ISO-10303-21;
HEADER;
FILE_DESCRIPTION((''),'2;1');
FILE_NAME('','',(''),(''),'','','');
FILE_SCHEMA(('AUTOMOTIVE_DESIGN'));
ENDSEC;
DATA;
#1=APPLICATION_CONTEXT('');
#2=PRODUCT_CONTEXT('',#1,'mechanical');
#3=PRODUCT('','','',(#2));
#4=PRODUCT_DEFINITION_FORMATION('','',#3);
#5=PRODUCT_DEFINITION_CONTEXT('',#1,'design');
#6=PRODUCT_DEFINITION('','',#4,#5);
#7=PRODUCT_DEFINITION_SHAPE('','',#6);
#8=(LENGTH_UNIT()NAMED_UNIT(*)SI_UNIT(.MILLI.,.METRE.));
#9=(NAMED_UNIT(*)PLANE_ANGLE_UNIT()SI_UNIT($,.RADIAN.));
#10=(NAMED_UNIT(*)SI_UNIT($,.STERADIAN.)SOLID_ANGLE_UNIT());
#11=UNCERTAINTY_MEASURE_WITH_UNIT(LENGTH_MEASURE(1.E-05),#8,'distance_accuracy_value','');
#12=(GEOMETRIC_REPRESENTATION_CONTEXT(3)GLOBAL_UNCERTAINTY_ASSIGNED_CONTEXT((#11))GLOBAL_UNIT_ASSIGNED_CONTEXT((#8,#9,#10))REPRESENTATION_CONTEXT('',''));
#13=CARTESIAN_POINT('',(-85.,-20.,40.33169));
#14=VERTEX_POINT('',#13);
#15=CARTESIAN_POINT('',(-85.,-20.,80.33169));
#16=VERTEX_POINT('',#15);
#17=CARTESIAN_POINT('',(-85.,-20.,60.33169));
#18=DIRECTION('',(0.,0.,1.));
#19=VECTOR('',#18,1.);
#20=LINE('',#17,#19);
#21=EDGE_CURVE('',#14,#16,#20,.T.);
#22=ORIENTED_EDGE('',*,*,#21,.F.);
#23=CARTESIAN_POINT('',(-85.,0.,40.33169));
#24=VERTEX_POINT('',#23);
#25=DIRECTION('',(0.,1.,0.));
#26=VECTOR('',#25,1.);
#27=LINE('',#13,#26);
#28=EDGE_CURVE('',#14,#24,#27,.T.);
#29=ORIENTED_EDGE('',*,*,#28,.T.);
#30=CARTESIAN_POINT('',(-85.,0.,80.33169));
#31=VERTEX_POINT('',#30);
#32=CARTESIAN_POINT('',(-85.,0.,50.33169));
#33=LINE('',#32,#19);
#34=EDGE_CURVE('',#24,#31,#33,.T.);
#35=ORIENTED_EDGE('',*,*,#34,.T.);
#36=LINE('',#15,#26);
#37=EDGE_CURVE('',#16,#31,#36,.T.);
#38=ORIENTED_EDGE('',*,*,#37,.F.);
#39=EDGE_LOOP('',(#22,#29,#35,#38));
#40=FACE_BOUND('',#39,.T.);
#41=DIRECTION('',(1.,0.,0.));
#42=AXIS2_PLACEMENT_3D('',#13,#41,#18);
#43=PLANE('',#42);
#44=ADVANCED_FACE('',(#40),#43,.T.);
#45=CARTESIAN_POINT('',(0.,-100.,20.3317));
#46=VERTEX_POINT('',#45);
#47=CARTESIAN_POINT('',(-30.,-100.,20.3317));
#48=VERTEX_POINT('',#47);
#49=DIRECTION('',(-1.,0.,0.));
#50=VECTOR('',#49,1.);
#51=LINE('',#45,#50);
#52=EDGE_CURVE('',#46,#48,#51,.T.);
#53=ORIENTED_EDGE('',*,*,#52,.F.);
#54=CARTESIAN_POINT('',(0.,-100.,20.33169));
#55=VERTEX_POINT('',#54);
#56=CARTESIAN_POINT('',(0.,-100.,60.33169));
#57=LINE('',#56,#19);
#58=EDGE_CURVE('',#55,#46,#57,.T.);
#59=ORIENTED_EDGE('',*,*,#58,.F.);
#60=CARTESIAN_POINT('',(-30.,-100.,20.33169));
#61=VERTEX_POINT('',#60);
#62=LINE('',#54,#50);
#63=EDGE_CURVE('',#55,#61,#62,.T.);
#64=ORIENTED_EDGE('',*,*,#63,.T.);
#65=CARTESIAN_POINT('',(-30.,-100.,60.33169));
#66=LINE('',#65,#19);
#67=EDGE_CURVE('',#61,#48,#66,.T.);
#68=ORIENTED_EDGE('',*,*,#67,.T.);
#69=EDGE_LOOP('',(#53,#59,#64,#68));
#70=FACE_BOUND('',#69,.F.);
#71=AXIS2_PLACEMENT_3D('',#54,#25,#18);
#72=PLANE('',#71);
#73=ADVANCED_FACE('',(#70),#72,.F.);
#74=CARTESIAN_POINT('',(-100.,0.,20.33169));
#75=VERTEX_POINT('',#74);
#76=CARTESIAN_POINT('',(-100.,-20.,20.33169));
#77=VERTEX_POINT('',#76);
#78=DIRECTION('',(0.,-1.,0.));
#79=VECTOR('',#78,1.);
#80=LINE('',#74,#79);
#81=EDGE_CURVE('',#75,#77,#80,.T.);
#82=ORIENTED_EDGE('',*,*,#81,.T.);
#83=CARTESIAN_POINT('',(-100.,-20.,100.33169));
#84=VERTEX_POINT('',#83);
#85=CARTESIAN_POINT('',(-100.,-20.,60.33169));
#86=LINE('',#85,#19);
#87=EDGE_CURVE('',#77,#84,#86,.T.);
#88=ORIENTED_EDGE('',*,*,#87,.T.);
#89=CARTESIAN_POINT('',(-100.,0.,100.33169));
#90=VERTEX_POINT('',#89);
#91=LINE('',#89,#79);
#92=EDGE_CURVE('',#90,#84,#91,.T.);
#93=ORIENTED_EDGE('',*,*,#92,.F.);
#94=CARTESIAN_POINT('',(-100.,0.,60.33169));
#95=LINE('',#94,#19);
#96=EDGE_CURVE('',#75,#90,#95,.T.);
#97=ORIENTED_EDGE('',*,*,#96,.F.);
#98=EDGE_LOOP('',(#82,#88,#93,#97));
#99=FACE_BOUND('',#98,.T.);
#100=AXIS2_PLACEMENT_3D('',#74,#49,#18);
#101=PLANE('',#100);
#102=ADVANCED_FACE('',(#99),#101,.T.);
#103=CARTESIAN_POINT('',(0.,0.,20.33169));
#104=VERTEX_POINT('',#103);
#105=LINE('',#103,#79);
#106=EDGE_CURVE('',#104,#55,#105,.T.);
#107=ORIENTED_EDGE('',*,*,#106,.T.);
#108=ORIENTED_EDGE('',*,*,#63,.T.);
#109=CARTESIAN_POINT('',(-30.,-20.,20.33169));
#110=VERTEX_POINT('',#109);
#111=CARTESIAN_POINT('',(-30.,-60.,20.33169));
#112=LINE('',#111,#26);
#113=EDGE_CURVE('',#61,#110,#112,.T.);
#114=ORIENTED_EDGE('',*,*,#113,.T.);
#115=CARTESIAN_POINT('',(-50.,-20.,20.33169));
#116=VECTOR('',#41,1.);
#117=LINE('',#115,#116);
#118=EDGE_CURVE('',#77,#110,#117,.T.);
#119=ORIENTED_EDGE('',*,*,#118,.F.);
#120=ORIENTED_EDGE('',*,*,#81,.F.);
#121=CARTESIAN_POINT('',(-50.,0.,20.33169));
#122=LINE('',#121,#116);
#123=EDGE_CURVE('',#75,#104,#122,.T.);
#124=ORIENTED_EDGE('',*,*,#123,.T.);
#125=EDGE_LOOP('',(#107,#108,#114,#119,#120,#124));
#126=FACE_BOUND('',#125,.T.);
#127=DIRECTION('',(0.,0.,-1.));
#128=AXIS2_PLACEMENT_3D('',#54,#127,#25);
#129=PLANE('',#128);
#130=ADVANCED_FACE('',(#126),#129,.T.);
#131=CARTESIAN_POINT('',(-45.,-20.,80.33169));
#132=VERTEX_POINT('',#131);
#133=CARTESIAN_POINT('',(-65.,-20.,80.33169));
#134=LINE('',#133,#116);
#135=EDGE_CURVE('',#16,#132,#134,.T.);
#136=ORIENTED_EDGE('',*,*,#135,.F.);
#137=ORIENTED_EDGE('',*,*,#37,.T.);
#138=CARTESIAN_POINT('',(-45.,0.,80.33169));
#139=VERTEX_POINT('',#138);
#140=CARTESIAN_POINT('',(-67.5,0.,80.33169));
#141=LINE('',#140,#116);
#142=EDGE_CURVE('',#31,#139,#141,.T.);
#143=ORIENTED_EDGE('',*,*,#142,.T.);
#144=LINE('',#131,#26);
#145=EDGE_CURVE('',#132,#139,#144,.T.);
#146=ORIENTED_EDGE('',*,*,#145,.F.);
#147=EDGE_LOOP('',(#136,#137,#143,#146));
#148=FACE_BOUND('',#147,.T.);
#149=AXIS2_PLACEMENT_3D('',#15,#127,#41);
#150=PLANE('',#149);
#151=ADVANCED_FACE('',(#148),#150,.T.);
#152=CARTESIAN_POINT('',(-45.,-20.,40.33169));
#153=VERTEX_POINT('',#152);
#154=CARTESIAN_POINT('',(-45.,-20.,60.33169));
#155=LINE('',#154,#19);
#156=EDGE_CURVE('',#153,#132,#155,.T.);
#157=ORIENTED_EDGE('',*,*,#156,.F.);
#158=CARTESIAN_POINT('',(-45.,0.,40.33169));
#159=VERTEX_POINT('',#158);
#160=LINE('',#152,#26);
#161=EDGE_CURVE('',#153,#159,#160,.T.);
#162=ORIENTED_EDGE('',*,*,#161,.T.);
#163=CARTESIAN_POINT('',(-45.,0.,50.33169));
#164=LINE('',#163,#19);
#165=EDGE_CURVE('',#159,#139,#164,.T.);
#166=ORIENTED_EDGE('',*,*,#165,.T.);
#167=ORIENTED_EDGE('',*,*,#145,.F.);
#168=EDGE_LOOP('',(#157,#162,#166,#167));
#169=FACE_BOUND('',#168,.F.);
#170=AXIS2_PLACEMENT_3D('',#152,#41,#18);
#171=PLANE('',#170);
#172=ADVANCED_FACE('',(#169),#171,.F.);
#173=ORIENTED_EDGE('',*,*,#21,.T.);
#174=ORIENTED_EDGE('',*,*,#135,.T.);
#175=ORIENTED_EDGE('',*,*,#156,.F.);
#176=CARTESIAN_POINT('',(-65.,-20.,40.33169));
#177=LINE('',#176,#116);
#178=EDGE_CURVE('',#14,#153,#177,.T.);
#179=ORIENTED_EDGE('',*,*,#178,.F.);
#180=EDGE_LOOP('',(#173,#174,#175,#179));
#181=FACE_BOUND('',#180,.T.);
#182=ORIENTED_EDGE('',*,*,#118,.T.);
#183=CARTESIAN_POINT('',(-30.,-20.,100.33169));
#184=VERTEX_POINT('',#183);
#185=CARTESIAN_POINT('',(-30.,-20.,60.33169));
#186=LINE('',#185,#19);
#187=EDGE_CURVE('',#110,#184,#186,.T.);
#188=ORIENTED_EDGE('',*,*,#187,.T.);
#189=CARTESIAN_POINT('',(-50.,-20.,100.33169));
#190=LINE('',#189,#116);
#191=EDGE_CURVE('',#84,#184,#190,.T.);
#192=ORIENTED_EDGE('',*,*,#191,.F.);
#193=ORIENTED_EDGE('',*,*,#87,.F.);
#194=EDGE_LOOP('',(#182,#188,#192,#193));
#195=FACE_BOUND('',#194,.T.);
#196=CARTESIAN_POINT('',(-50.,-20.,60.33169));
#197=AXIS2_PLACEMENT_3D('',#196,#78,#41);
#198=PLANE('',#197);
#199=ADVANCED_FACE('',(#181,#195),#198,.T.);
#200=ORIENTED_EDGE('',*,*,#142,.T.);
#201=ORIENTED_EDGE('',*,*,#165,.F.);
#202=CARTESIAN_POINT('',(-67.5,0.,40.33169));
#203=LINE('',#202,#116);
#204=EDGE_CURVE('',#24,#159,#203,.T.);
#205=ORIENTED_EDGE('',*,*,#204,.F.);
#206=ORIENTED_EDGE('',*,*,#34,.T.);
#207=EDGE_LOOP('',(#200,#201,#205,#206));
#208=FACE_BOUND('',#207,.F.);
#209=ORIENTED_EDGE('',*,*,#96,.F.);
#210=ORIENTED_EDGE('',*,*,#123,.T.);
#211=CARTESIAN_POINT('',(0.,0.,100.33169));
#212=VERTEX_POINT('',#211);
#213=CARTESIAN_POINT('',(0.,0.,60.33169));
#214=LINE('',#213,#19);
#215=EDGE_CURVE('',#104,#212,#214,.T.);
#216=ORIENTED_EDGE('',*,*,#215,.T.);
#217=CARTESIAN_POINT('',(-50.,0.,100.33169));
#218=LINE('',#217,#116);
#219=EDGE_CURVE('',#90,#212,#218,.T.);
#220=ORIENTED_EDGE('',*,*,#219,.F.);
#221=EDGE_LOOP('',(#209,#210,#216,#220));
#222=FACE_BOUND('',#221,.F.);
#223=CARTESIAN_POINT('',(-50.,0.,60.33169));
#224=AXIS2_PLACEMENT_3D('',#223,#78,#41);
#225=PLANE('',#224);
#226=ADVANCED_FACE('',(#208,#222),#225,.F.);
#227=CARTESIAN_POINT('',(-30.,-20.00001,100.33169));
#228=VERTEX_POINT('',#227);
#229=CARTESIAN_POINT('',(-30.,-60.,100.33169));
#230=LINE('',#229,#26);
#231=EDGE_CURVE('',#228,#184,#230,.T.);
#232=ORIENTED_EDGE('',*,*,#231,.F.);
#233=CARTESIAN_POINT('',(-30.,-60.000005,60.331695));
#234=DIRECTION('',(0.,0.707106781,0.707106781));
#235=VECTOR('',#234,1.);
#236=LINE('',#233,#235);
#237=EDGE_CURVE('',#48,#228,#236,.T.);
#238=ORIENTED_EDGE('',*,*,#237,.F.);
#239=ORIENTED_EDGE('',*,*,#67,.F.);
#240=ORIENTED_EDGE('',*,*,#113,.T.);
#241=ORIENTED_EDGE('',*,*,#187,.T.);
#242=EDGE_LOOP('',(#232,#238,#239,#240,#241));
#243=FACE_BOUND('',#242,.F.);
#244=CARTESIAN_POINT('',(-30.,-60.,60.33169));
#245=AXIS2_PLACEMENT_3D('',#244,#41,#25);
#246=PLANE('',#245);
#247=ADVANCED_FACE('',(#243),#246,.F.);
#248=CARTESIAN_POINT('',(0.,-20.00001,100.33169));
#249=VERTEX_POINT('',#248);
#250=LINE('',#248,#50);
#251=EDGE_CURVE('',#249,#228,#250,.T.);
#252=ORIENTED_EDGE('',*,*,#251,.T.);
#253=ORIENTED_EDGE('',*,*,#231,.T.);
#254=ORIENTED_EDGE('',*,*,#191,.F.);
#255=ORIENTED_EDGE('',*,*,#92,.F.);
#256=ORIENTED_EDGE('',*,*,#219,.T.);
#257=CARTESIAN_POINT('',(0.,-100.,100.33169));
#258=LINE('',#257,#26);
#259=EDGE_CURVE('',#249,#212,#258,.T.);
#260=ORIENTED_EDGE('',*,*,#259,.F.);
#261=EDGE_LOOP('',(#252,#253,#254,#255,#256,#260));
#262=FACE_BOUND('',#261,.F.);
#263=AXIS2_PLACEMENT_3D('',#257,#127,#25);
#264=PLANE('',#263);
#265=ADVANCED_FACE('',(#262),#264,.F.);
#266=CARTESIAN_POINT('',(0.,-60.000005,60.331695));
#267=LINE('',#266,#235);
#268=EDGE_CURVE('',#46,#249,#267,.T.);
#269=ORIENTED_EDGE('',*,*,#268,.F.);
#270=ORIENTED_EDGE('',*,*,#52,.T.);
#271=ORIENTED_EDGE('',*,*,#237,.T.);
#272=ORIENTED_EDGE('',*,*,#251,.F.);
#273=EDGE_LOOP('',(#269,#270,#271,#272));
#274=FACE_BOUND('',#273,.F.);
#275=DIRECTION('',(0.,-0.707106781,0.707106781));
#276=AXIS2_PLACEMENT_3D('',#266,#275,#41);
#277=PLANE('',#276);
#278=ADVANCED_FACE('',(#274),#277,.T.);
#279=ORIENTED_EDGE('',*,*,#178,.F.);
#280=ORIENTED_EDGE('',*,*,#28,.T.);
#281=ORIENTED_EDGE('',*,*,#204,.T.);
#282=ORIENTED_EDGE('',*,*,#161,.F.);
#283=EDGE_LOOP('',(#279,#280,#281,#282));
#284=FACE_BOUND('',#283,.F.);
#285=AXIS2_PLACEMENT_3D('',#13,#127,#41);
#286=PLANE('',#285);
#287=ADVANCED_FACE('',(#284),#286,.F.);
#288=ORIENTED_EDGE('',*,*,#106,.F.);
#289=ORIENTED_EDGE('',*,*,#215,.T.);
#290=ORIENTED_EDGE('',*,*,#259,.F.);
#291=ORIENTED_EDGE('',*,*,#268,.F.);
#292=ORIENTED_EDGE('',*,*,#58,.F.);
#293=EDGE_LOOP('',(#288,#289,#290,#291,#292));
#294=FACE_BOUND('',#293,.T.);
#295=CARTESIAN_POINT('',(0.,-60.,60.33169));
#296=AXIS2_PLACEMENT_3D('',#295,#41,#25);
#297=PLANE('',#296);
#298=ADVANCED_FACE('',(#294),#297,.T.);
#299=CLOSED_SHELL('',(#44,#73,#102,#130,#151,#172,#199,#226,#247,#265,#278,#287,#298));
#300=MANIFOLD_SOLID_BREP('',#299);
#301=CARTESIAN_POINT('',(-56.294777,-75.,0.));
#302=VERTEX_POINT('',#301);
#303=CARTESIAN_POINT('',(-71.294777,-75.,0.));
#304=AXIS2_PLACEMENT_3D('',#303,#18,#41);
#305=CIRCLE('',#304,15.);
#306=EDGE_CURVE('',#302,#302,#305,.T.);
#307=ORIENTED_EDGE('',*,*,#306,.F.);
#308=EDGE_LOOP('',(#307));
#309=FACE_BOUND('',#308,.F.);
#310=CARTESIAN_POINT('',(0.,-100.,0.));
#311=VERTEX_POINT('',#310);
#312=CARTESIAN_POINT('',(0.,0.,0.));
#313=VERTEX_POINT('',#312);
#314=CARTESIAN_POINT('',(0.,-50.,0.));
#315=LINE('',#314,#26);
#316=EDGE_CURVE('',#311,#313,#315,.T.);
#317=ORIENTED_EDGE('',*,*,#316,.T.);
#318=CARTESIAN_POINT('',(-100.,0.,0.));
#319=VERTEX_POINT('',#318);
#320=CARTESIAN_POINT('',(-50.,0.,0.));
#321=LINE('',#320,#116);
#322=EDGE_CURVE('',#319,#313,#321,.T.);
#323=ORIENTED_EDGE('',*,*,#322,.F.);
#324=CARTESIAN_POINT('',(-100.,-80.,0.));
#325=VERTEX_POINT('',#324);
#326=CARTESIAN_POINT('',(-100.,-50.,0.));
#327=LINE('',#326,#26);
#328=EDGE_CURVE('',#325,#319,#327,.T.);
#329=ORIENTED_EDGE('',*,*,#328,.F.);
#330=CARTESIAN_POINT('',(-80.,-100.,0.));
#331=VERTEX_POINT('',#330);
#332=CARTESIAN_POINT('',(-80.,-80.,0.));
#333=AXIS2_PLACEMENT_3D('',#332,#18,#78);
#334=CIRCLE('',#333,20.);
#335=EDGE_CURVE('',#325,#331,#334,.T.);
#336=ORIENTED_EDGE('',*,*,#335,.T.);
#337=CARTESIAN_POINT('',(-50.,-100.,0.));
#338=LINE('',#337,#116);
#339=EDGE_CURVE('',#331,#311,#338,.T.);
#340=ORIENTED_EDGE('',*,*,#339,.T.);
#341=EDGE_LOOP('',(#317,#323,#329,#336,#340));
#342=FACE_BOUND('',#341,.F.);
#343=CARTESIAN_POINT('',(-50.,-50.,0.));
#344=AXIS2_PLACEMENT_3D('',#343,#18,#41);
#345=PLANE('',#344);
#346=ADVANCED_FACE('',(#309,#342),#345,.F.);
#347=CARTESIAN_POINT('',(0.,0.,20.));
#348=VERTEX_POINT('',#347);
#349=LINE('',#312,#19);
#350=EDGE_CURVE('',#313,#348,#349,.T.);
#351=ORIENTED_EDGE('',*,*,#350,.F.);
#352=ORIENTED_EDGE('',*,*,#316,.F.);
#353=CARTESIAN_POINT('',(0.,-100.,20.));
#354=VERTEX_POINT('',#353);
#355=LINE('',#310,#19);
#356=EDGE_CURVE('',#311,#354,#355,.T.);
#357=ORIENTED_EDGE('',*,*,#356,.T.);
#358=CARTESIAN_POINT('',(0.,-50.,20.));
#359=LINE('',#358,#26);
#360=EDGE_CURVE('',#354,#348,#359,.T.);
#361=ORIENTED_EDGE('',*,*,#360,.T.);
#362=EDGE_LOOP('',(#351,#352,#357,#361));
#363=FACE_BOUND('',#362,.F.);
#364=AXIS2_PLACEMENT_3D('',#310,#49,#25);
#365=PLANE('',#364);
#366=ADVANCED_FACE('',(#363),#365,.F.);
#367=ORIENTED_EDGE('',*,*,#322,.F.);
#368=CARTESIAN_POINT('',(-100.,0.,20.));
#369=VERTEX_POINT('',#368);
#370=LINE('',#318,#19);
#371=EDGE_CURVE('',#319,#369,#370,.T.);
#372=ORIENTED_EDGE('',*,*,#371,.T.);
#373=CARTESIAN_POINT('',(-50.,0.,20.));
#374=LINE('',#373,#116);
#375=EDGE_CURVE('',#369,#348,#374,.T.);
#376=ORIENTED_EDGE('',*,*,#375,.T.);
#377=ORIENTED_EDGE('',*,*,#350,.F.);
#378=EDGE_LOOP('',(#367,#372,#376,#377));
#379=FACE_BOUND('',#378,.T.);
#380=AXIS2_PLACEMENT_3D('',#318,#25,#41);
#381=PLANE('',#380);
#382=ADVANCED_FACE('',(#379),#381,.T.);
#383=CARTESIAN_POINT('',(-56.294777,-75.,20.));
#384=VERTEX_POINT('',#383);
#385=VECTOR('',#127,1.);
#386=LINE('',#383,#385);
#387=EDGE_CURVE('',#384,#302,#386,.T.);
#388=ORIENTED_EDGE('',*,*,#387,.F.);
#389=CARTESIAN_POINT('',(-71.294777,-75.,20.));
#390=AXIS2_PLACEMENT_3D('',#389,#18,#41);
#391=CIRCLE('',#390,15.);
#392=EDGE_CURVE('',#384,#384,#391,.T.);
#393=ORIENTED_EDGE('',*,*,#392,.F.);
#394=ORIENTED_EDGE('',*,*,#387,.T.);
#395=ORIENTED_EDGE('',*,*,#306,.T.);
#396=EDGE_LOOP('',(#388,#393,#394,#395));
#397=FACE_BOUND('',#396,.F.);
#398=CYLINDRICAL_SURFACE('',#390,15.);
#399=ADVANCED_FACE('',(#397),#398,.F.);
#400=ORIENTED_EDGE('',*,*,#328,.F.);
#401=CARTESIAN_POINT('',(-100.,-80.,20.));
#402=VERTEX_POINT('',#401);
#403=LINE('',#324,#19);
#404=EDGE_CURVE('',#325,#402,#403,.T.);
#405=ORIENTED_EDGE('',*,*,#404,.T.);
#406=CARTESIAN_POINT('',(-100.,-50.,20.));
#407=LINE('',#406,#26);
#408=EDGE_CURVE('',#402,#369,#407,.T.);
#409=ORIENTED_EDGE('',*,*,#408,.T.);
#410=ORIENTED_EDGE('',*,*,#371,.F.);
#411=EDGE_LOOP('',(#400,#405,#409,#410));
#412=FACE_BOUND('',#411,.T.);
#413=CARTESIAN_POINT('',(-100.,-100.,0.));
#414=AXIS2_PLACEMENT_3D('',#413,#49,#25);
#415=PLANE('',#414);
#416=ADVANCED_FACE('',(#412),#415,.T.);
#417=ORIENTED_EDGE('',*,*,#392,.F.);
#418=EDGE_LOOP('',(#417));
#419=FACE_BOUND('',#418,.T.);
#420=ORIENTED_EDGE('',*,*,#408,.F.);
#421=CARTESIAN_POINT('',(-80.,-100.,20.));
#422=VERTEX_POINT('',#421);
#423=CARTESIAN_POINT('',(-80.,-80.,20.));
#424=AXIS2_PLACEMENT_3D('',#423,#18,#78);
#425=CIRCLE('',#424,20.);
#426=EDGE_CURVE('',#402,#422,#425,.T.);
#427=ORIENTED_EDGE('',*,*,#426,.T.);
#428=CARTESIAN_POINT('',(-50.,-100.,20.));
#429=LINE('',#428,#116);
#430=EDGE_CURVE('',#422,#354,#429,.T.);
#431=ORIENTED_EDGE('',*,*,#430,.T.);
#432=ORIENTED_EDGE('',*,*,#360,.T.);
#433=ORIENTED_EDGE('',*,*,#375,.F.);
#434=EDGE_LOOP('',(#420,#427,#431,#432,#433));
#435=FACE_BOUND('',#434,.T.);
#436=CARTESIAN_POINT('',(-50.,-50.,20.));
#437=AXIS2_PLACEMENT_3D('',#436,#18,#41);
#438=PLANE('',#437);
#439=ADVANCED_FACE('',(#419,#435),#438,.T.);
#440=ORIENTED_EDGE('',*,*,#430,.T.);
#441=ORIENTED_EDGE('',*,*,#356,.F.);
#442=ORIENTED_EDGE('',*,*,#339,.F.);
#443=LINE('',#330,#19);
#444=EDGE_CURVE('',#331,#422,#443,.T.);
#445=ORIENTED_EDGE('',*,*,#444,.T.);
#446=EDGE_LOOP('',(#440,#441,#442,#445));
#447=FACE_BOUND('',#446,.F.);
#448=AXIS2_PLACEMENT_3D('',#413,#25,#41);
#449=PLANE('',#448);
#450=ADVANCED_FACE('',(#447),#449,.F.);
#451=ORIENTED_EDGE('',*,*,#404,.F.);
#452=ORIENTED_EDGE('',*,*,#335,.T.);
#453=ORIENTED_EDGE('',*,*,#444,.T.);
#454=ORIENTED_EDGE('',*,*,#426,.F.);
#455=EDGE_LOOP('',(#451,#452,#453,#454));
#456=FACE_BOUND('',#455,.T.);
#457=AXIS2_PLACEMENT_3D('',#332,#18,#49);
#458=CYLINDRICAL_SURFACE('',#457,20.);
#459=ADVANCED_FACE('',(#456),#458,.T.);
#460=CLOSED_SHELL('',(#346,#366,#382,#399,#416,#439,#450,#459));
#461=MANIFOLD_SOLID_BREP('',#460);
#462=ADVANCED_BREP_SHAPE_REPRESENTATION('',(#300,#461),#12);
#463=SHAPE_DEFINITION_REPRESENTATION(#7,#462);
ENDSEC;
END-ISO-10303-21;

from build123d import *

# Parameters (mm, degrees)
F0_W      = 100
F0_H      = 100
F1_DEPTH  = 20
F2_W      = 100
F2_H      = 80
F3_DEPTH  = 20
F4_R      = 15
F5_DEPTH  = 22
F6_W      = 80
F6_H      = 80
F7_DEPTH  = 30
F8_SIZE   = 79.99999
F9_R      = 20
F10_W     = 40
F10_H     = 40
F11_DEPTH = 25


# Not quite as in the source:
# - a fillet or chamfer is up to 0.001 mm smaller than in the source, because OpenCascade refuses the exact size


with BuildPart() as f1:
    # F0 (on Top) → F1 (new body)
    with BuildSketch(Plane.XY):
        with Locations((-50, -50)):
            Rectangle(F0_W, F0_H)
    extrude(amount=F1_DEPTH)

    # F4 (on face) → F5 (cut)
    with BuildSketch(Plane.XY.offset(20)):
        with Locations((-71.2947770953, -75)):
            Circle(F4_R)
    extrude(amount=-F5_DEPTH, mode=Mode.SUBTRACT)

    # F9
    f9_edges = [f1.edges().sort_by_distance(p)[0] for p in [
        (-100, -100, 10),
    ]]
    fillet(f9_edges, radius=F9_R)


with BuildPart() as f3:
    # F2 (on Front) → F3 (new body)
    with BuildSketch(Plane.XZ):
        with Locations((-50, 60.3316903863)):
            Rectangle(F2_W, F2_H)
    extrude(amount=F3_DEPTH)

    # F6 (on face) → F7 (join)
    with BuildSketch(Plane.YZ):
        with Locations((-60, 60.3316903863)):
            Rectangle(F6_W, F6_H)
    extrude(amount=-F7_DEPTH)

    # F8 (size 80 in the source; OpenCascade refuses exactly that, so slightly less here)
    f8_edges = [f3.edges().sort_by_distance(p)[0] for p in [
        (-15, -100, 100.33169),
    ]]
    chamfer(f8_edges, length=F8_SIZE)

    # F10 (on face) → F11 (cut)
    with BuildSketch(Plane.XZ.offset(20)):
        with Locations((-65, 60.3316903863)):
            Rectangle(F10_W, F10_H)
    extrude(amount=-F11_DEPTH, mode=Mode.SUBTRACT)


solid = Compound([f1.part, f3.part])
